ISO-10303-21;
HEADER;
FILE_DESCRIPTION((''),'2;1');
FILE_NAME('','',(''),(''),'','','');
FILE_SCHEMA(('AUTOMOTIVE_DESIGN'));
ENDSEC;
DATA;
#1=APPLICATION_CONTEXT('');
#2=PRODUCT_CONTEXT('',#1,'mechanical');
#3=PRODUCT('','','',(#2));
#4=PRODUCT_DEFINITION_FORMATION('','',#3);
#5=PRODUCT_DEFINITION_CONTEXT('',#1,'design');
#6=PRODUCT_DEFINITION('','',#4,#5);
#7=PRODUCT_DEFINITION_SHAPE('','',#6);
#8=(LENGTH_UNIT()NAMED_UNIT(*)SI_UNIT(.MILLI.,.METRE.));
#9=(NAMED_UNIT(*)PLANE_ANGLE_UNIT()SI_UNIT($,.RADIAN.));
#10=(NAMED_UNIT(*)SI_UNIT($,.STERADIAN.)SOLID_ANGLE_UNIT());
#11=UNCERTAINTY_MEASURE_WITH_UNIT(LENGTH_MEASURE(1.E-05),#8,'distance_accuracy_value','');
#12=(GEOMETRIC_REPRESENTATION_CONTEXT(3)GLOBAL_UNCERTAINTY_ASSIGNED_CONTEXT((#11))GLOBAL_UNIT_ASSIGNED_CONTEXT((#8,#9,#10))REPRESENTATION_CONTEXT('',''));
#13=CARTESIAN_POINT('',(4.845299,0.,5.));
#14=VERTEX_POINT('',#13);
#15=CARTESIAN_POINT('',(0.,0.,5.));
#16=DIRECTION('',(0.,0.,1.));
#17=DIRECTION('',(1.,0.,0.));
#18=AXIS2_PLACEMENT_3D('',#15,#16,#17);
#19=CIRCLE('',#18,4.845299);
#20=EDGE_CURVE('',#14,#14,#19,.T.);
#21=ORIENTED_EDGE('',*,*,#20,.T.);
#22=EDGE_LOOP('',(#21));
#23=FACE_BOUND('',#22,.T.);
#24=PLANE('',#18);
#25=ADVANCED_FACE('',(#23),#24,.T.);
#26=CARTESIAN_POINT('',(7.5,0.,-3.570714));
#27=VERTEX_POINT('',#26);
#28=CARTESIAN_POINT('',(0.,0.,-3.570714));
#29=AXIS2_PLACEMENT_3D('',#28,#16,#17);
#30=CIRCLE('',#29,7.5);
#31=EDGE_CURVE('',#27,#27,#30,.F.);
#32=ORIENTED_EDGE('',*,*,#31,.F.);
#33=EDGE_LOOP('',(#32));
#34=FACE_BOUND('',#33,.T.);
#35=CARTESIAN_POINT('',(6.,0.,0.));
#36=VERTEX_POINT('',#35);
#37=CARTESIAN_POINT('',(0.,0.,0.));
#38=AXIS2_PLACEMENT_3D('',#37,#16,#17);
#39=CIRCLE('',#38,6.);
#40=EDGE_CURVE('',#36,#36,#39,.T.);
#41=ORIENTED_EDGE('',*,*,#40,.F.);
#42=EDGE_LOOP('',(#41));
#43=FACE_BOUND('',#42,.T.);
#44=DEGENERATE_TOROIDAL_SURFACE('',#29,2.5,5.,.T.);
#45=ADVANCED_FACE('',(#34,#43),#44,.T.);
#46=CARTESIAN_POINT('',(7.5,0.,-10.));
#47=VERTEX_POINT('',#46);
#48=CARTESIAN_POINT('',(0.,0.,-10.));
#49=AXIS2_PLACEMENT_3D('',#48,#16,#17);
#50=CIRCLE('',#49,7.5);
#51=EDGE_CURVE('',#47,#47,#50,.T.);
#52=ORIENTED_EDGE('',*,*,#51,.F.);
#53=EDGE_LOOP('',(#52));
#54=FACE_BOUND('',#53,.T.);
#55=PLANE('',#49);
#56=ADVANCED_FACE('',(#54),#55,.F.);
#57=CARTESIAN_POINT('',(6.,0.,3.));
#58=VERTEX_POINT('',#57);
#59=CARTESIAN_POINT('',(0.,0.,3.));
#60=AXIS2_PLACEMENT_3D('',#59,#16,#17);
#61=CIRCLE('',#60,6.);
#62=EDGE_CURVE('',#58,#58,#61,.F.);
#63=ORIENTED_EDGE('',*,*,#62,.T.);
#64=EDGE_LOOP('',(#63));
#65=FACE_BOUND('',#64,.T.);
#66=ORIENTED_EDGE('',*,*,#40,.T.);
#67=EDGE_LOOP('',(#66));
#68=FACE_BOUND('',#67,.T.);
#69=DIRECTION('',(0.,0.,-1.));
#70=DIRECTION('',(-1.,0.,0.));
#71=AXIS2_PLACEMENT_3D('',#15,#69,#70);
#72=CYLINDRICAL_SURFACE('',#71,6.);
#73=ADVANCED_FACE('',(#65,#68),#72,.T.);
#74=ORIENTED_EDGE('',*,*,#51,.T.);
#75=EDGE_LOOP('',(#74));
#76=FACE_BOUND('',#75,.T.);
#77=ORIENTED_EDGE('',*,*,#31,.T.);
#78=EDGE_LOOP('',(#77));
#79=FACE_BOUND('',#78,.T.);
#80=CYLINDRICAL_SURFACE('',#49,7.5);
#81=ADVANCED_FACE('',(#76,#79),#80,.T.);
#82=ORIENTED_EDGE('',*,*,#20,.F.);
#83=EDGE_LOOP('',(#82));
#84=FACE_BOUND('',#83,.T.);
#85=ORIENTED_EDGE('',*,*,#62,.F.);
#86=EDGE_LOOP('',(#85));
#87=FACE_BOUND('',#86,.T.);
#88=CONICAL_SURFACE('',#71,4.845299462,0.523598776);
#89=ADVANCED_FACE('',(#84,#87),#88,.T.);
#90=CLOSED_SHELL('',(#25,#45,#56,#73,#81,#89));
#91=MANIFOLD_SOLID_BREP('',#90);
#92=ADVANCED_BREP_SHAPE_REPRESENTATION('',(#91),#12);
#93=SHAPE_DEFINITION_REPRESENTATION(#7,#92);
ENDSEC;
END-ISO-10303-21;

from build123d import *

# Parameters (mm, degrees)
SZKIC1_R                    = 6
DODANIE_WYCI_GNI_CIE1_DEPTH = 5
SZKIC2_R                    = 7.5
DODANIE_WYCI_GNI_CIE2_DEPTH = 10
SFAZOWANIE1_SIZE            = 2
SFAZOWANIE1_SIZE2           = 1.154700538
ZAOKR_GLENIE1_R             = 5


with BuildPart() as part:
    # Szkic1 → Dodanie-wyciągnięcie1 (new body)
    with BuildSketch(Plane.XY):
        Circle(SZKIC1_R)
    extrude(amount=DODANIE_WYCI_GNI_CIE1_DEPTH)

    # Szkic2 → Dodanie-wyciągnięcie2 (add)
    with BuildSketch(Plane.XY):
        Circle(SZKIC2_R)
    extrude(amount=-DODANIE_WYCI_GNI_CIE2_DEPTH)

    # Sfazowanie1
    sfazowanie1_edges = [part.edges().sort_by_distance(p)[0] for p in [
        (-6, 0, 5),
    ]]
    sfazowanie1_side = [part.faces().sort_by_distance(p)[0] for p in [
        (-6, 0, 2.5),
    ]]
    chamfer(sfazowanie1_edges, length=SFAZOWANIE1_SIZE, length2=SFAZOWANIE1_SIZE2, reference=sfazowanie1_side[0])

    # Zaokrąglenie1
    # the kernel refuses this fillet: 5 mm, written as the material it takes off along each edge
    with BuildSketch(Plane(origin=(0, 0, 0), x_dir=(1, 0, 0), z_dir=(0, -1, 0))) as zaokr_glenie1_piece_1:
        with BuildLine():
            CenterArc((2.5, -3.570714214), ZAOKR_GLENIE1_R, 0, 45.572995999)
            Line((7.5, -3.570714214), (7.6, -3.570714214))
            Line((7.6, -3.570714214), (7.6, 0))
            Line((7.6, 0), (7.5, 0.1))
            ThreePointArc((7.5, 0.1), (6.75, 0.1), (6.07, 0.071414284))
            Line((6.07, 0.071414284), (6, 0))
        make_face()
    revolve(axis=Axis((0, 0, 0), (0, 0, 1)), mode=Mode.SUBTRACT)


solid = part.part
